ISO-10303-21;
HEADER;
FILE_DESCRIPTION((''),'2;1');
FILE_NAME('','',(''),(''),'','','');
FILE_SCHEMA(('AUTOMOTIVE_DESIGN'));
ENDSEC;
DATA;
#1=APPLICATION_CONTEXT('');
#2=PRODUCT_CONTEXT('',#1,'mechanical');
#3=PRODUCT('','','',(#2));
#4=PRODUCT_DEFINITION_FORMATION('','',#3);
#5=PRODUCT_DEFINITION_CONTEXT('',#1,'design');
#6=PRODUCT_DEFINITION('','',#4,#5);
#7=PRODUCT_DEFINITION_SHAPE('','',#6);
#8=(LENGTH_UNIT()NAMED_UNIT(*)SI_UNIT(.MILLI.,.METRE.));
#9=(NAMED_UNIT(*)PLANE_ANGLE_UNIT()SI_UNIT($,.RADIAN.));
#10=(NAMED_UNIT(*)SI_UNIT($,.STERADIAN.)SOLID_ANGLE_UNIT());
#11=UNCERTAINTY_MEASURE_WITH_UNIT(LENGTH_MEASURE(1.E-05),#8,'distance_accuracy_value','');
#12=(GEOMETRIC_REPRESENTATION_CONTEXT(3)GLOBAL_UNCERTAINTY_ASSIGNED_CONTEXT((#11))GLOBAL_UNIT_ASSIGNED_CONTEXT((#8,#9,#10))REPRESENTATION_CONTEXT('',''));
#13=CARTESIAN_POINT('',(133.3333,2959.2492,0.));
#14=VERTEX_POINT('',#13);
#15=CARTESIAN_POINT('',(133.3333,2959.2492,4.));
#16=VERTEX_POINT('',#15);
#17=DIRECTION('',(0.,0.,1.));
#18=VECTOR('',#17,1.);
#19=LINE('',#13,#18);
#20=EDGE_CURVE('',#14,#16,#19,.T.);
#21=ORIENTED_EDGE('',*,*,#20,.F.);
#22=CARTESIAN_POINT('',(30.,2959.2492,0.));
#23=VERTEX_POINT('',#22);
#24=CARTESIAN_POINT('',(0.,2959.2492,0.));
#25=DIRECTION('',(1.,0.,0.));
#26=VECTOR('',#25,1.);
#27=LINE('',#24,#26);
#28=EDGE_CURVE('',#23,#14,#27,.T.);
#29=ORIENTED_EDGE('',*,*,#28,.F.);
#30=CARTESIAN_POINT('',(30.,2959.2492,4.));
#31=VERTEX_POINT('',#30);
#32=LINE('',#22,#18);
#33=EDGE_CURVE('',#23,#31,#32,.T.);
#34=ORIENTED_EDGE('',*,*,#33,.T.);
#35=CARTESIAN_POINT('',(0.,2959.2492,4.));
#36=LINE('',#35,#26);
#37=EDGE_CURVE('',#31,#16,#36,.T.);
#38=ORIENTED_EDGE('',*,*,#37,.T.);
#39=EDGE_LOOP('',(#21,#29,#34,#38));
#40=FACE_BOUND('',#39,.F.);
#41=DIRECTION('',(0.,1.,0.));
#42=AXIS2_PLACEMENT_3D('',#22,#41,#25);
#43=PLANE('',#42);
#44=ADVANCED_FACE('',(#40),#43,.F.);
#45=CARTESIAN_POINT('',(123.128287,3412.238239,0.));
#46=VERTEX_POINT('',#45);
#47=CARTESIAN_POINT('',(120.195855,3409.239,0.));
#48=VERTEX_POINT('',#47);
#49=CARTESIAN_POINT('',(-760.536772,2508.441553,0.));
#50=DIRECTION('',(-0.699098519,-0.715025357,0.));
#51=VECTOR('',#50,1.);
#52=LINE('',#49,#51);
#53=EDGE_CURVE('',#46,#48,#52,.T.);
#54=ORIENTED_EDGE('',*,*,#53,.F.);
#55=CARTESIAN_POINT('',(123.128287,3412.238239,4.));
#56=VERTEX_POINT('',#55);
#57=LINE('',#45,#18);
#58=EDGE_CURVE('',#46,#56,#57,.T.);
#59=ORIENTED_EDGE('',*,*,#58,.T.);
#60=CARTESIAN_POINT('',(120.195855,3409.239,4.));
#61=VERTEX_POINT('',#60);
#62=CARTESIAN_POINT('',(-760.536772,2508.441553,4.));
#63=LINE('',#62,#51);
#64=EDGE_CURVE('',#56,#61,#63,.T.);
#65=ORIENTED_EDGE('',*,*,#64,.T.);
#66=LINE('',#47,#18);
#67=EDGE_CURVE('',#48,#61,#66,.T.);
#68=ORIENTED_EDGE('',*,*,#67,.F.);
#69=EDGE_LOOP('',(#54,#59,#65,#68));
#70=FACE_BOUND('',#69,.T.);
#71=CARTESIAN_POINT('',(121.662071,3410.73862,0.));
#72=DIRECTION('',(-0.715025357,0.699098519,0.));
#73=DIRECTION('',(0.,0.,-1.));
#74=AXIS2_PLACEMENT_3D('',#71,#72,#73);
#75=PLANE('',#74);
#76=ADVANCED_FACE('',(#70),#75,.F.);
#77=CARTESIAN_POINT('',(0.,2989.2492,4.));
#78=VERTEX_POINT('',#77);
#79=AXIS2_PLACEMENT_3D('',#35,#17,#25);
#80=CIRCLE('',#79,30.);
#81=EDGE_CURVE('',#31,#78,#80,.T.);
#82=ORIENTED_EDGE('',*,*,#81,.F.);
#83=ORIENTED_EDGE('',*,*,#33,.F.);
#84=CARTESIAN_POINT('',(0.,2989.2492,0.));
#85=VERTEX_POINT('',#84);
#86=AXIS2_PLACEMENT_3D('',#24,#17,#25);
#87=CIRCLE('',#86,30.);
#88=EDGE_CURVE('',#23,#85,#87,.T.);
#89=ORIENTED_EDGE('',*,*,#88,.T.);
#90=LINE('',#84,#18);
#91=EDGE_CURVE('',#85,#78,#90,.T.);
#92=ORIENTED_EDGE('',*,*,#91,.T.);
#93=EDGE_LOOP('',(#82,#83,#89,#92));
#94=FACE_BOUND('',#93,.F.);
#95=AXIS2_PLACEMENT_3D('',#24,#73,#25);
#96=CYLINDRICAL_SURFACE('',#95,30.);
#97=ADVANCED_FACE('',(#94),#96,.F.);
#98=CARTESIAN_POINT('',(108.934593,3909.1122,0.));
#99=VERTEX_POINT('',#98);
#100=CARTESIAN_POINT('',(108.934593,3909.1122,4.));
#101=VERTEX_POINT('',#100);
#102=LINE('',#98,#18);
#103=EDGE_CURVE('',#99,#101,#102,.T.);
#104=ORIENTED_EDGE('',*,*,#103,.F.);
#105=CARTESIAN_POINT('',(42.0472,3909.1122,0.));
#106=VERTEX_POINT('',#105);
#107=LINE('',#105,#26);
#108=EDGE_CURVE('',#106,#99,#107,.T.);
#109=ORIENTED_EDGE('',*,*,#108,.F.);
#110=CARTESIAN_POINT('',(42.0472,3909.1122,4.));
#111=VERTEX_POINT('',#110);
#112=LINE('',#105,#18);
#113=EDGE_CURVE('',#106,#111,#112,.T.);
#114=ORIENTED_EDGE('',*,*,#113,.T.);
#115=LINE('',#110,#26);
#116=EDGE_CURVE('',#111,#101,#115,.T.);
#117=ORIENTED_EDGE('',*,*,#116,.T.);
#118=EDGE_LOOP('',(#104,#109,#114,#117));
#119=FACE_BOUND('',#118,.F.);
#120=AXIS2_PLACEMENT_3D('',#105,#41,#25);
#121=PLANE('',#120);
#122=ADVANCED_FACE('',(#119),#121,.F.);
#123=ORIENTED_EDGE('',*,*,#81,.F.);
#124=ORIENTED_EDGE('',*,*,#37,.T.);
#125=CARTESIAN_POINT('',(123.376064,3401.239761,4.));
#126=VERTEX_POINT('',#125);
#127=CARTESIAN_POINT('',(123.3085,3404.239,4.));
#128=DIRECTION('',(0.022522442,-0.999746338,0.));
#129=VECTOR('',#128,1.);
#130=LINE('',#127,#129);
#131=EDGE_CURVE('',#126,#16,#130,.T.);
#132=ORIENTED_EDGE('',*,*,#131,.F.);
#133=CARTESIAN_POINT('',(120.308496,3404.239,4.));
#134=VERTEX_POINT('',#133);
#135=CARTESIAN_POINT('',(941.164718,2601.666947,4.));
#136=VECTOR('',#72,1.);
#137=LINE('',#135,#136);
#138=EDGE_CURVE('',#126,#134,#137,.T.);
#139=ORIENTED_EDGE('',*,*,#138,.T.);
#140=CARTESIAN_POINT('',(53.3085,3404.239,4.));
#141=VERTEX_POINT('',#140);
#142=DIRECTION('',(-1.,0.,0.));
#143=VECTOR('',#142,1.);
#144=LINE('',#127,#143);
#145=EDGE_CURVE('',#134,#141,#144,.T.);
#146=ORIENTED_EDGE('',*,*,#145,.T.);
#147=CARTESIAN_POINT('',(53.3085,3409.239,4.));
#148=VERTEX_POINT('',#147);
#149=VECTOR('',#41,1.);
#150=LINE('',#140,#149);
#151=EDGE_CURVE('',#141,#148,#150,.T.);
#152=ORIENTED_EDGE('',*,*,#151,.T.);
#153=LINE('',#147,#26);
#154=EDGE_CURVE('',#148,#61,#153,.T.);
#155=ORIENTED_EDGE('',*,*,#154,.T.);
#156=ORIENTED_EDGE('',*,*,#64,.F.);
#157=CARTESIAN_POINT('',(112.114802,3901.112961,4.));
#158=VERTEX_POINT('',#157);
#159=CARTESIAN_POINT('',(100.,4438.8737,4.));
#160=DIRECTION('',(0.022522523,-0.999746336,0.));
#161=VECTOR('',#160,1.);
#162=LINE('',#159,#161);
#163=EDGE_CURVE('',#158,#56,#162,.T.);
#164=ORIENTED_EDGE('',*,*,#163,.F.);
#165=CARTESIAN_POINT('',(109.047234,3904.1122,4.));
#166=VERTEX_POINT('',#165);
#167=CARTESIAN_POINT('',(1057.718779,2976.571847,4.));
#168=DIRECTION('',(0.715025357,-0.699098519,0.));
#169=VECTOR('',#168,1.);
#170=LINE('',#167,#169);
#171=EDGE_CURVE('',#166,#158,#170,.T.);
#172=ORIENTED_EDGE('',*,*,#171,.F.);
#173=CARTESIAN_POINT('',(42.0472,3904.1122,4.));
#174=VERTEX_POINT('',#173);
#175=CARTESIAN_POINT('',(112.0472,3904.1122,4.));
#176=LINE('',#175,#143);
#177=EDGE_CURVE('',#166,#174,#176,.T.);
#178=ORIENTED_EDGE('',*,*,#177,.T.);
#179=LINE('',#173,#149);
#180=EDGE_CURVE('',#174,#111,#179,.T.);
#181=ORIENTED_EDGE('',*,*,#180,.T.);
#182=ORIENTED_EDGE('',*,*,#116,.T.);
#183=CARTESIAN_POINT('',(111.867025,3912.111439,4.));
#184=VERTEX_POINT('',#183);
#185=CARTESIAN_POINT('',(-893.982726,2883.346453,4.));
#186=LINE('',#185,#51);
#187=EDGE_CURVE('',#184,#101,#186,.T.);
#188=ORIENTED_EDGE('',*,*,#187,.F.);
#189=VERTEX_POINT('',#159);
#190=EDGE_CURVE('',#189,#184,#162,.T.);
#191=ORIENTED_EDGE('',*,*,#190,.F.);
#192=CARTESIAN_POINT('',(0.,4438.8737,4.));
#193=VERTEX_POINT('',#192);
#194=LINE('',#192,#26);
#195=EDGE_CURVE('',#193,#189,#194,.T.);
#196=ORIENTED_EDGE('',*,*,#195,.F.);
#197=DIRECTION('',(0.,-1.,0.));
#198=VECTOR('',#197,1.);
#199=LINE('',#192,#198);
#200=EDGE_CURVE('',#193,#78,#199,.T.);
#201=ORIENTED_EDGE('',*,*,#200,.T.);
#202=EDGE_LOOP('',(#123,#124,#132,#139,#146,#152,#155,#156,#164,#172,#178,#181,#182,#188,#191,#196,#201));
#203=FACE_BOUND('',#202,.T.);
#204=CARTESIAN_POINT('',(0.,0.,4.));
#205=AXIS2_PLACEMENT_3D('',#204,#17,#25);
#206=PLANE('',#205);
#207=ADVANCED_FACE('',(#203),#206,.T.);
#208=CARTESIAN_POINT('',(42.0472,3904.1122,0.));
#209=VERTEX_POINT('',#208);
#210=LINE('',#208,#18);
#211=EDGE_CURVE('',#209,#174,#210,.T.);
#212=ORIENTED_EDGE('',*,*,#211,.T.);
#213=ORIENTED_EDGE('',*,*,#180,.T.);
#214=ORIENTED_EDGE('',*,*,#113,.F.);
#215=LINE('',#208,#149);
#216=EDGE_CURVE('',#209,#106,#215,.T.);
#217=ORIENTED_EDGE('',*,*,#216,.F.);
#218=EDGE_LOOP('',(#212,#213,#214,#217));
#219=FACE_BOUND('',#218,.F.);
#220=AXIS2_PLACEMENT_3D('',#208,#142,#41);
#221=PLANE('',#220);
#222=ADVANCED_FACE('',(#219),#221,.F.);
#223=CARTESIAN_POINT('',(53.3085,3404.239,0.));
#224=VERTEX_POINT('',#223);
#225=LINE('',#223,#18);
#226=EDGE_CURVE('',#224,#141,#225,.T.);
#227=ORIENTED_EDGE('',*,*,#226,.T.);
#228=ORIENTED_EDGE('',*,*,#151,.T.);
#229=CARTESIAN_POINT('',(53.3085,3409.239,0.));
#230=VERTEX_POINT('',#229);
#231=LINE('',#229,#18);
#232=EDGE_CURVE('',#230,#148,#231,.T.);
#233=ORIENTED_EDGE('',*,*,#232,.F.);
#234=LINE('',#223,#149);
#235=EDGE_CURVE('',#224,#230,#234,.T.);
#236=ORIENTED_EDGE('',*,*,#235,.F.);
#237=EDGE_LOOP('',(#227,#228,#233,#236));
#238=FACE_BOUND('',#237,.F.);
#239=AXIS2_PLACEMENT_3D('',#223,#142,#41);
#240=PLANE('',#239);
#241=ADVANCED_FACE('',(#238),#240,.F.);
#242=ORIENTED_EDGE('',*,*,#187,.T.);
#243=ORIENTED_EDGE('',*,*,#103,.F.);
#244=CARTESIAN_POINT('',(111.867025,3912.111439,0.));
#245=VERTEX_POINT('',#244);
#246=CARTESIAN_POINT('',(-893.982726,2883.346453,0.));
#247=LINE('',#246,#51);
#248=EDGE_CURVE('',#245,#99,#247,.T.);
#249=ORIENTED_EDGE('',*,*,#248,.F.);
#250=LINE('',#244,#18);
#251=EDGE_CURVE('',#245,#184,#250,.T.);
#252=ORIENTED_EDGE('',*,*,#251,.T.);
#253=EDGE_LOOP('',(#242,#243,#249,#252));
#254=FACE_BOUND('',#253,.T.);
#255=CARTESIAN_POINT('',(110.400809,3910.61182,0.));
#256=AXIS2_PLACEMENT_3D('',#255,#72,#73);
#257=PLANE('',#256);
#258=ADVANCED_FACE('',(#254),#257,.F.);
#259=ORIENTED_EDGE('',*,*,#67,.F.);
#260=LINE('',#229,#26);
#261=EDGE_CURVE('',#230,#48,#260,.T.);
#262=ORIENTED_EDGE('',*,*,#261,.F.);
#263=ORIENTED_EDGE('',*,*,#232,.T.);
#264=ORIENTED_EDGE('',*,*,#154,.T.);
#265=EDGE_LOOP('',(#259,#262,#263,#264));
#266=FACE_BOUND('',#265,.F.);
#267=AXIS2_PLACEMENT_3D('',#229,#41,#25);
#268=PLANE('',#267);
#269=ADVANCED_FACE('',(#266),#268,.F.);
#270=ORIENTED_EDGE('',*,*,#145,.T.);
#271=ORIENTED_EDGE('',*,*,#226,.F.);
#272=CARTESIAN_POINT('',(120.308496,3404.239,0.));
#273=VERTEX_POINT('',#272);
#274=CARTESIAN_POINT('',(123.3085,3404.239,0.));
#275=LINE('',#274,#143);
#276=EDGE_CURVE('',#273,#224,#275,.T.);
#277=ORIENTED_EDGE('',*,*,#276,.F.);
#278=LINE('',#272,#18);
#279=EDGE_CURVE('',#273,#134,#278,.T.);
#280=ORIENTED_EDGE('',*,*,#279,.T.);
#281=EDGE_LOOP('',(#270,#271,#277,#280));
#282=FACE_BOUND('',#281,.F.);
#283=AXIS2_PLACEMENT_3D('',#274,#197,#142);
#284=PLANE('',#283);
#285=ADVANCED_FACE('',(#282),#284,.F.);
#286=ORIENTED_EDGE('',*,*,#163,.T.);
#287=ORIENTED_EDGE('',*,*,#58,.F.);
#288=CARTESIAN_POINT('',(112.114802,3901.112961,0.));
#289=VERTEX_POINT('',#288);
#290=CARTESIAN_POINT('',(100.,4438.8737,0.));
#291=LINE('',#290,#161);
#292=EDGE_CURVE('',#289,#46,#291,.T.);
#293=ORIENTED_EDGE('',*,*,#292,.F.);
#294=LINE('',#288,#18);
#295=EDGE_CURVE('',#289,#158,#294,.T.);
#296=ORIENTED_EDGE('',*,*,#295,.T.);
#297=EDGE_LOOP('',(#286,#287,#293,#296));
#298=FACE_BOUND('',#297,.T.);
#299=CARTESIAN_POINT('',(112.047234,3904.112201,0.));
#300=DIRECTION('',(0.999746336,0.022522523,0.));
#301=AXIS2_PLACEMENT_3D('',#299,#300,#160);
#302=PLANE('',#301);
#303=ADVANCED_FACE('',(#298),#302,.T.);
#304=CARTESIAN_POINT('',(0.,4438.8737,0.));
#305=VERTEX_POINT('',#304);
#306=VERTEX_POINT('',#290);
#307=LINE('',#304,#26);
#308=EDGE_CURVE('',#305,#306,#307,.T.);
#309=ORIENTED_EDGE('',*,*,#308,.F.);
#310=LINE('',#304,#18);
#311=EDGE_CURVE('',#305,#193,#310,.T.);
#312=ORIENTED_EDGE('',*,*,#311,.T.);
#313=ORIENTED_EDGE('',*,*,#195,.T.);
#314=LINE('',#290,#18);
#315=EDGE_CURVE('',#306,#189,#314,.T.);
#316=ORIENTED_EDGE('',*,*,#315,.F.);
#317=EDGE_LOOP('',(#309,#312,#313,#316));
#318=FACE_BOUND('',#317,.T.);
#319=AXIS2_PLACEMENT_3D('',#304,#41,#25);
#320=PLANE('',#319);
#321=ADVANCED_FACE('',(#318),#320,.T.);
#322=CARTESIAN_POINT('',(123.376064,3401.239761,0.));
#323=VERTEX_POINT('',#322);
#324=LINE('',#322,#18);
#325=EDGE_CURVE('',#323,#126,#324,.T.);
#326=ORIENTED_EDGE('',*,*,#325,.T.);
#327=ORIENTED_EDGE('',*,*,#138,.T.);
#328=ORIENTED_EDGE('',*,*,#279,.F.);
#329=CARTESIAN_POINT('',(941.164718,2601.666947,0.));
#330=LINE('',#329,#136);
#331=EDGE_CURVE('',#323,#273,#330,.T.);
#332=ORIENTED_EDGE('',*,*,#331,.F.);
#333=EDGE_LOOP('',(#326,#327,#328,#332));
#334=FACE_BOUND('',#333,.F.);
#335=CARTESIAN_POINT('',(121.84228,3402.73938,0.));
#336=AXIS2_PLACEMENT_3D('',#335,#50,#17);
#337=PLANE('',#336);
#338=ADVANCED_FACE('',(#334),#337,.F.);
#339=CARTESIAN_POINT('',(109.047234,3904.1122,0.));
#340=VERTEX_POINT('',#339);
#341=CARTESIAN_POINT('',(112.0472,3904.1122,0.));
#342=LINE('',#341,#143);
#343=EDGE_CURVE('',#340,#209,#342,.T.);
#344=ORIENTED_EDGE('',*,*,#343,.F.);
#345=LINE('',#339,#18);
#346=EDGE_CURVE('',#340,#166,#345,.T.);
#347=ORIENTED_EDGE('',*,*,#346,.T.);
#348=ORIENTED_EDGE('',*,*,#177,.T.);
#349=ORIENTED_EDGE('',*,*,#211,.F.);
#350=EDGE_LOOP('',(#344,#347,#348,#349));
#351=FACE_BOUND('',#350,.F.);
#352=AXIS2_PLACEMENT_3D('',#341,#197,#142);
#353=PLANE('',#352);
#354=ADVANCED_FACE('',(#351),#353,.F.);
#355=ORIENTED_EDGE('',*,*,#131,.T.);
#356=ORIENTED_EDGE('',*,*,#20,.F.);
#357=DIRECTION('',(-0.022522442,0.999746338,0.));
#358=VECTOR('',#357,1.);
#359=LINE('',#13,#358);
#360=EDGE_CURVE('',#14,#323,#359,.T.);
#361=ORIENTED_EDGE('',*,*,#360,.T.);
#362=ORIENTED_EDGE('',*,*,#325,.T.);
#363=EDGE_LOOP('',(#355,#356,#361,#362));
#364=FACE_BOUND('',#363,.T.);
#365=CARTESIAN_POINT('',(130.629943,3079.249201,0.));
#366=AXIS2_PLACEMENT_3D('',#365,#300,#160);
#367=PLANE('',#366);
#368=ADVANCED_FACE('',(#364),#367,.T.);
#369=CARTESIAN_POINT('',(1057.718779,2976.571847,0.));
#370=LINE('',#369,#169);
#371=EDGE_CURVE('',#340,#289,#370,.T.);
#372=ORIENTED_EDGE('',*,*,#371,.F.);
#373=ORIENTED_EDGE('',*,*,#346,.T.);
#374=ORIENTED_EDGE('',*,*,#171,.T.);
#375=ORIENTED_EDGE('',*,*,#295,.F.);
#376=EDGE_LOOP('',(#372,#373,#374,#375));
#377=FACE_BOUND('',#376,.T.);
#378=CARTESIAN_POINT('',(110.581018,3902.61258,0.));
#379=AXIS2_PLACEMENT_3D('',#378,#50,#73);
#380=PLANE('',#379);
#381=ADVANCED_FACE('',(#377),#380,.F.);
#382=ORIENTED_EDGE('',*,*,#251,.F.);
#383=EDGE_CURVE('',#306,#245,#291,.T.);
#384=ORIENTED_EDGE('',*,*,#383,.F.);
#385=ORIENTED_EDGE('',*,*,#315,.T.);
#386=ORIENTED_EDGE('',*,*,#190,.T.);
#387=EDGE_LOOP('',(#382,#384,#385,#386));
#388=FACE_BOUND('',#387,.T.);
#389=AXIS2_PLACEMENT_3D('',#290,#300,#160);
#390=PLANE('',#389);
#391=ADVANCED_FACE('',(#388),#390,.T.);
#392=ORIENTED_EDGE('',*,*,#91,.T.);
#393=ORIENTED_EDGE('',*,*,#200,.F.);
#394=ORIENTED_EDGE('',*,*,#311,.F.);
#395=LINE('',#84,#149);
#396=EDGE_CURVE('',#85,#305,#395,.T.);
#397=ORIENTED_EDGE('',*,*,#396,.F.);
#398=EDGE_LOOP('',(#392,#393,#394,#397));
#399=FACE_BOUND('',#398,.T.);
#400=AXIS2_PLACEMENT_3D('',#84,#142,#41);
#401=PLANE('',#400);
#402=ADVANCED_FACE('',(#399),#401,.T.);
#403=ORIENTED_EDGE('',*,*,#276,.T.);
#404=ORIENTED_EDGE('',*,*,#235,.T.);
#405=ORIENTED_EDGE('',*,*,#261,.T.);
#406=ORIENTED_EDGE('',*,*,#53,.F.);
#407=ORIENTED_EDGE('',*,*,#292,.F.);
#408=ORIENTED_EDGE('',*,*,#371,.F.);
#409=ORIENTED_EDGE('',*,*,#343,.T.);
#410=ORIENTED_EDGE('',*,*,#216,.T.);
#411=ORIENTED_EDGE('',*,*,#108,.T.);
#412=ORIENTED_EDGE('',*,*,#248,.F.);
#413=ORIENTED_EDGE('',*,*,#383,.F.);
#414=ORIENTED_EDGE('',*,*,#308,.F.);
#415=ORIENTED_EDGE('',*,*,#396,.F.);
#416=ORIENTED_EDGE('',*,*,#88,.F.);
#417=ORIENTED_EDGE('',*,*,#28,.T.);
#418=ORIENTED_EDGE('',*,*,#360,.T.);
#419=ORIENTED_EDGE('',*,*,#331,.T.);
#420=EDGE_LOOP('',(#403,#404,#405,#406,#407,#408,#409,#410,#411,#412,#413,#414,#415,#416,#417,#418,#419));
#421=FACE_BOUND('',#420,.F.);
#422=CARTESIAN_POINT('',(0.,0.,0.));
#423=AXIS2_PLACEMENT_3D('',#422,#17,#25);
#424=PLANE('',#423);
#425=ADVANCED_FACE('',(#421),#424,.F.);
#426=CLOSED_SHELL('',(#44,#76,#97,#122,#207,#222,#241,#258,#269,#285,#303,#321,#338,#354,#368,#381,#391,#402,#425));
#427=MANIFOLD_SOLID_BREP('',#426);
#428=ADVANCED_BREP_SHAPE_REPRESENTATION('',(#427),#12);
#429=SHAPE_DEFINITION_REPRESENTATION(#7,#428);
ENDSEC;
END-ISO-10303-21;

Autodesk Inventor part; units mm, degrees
ref_plane "YZ Plane" through (0, 0, 0) normal (1, 0, 0) x (0, 1, 0)
ref_plane "XZ Plane" through (0, 0, 0) normal (0, 1, 0) x (-1, 0, 0)
ref_plane "XY Plane" through (0, 0, 0) normal (0, 0, 1) x (1, 0, 0)
sketch "Sketch1" plane through (0, 0, 0) normal (0, 0, 1) x (1, 0, 0)
  line L0 (0, 0) -> (0, 4438.8737)
  line L1 (0, 4438.8737) -> (100, 4438.8737)
  line L2 (100, 4438.8737) -> (200, 0)
  line L3 (200, 0) -> (0, 0)
  circle A0 centre (0, 0) radius 30
  line L4 (0, 1479.6246) -> (166.6667, 1479.6246)
  line L5 (0, 2959.2492) -> (133.3333, 2959.2492)
  circle A1 centre (0, 1479.6246) radius 30
  circle A2 centre (0, 2959.2492) radius 30
  line L6 (190.8761, 405) -> (120.8761, 405)
  line L7 (120.8761, 405) -> (120.8761, 410)
  line L8 (120.8761, 410) -> (190.8761, 410)
  line L9 (190.8761, 410) -> (190.8761, 405)
  line L10 (109.6148, 909.8732) -> (179.6148, 909.8732)
  line L11 (179.6148, 904.8732) -> (109.6148, 904.8732)
  line L12 (109.6148, 904.8732) -> (109.6148, 909.8732)
  line L13 (179.6148, 909.8732) -> (179.6148, 904.8732)
  line L14 (98.3535, 1409.7463) -> (168.3535, 1409.7463)
  line L15 (168.3535, 1404.7463) -> (98.3535, 1404.7463)
  line L16 (98.3535, 1404.7463) -> (98.3535, 1409.7463)
  line L17 (168.3535, 1409.7463) -> (168.3535, 1404.7463)
  line L18 (87.0923, 1909.6195) -> (157.0923, 1909.6195)
  line L19 (157.0923, 1904.6195) -> (87.0923, 1904.6195)
  line L20 (87.0923, 1904.6195) -> (87.0923, 1909.6195)
  line L21 (157.0923, 1909.6195) -> (157.0923, 1904.6195)
  line L22 (75.831, 2409.4927) -> (145.831, 2409.4927)
  line L23 (145.831, 2404.4927) -> (75.831, 2404.4927)
  line L24 (75.831, 2404.4927) -> (75.831, 2409.4927)
  line L25 (145.831, 2409.4927) -> (145.831, 2404.4927)
  line L26 (64.5698, 2909.3658) -> (134.5698, 2909.3658)
  line L27 (134.5698, 2904.3658) -> (64.5698, 2904.3658)
  line L28 (64.5698, 2904.3658) -> (64.5698, 2909.3658)
  line L29 (134.5698, 2909.3658) -> (134.5698, 2904.3658)
  line L30 (53.3085, 3409.239) -> (123.3085, 3409.239)
  line L31 (123.3085, 3404.239) -> (53.3085, 3404.239)
  line L32 (53.3085, 3404.239) -> (53.3085, 3409.239)
  line L33 (123.3085, 3409.239) -> (123.3085, 3404.239)
  line L34 (42.0472, 3909.1122) -> (112.0472, 3909.1122)
  line L35 (112.0472, 3904.1122) -> (42.0472, 3904.1122)
  line L36 (42.0472, 3904.1122) -> (42.0472, 3909.1122)
  line L37 (112.0472, 3909.1122) -> (112.0472, 3904.1122)
  line L38 (0, 1629.6246) -> (163.2874, 1629.6246)
  line L39 (0, 3079.2492) -> (130.6299, 3079.2492)
  point P0 (30, 2959.2492)
  point P1 (0, 2929.2492)
  point P2 (0, 1509.6246)
  point P3 (0, 1449.6246)
  point P4 (0, 30)
  point P5 (30, 0)
  point P6 (190.7634, 410)
  point P7 (179.5022, 909.8732)
  point P8 (168.3535, 1404.7463)
  point P9 (168.2409, 1409.7463)
  point P10 (30, 1479.6246)
  point P11 (157.0923, 1904.6195)
  point P12 (156.9796, 1909.6195)
  point P13 (145.831, 2404.4927)
  point P14 (145.7184, 2409.4927)
  point P15 (134.5698, 2904.3658)
  point P16 (134.4571, 2909.3658)
  point P17 (0, 2989.2492)
  point P18 (123.3085, 3404.239)
  point P19 (123.1959, 3409.239)
  point P20 (112.0472, 3904.1122)
  point P21 (111.9346, 3909.1122)
  dimension "d65" = 100
  dimension "d67" = 200
  dimension "d68" = 60
  dimension "d69" = 1480
  dimension "d70" = 1480
  dimension "d71" = 1480
  dimension "d72" = 5
  dimension "d73" = 70
  dimension "d74" = 410
  dimension "d77" = 500
  dimension "d82" = 120
  dimension "d83" = 150
extrude "Plate3" add sketch "Sketch1" along normal blind 4 contours L39 L2 L5 A2 L0 | L0 L1 L2 L34 L36 L35 L30 L32 L31 L39
chamfer "Corner Chamfer2" distance 3 angle 45 4 edges at (123.3085, 3404.239, 2) (123.1959, 3409.239, 2) (112.0472, 3904.1122, 2) (111.9346, 3909.1122, 2)
equation "\"BendRadius\" = Thickness"
equation "\"BendReliefWidth\" = Thickness"
equation "\"BendReliefDepth\" = 0.5 * Thickness"
equation "\"CornerReliefSize\" = 4 * Thickness"
equation "\"MinimumRemnant\" = 2 * Thickness"
equation "\"TransitionRadius\" = BendRadius"
equation "\"JacobiRadiusSize\" = BendRadius"
equation "\"GapSize\" = Thickness"
equation "\"Thickness\" = 4"
properties part number "GBK 3314 central third rib" material "Steel"
